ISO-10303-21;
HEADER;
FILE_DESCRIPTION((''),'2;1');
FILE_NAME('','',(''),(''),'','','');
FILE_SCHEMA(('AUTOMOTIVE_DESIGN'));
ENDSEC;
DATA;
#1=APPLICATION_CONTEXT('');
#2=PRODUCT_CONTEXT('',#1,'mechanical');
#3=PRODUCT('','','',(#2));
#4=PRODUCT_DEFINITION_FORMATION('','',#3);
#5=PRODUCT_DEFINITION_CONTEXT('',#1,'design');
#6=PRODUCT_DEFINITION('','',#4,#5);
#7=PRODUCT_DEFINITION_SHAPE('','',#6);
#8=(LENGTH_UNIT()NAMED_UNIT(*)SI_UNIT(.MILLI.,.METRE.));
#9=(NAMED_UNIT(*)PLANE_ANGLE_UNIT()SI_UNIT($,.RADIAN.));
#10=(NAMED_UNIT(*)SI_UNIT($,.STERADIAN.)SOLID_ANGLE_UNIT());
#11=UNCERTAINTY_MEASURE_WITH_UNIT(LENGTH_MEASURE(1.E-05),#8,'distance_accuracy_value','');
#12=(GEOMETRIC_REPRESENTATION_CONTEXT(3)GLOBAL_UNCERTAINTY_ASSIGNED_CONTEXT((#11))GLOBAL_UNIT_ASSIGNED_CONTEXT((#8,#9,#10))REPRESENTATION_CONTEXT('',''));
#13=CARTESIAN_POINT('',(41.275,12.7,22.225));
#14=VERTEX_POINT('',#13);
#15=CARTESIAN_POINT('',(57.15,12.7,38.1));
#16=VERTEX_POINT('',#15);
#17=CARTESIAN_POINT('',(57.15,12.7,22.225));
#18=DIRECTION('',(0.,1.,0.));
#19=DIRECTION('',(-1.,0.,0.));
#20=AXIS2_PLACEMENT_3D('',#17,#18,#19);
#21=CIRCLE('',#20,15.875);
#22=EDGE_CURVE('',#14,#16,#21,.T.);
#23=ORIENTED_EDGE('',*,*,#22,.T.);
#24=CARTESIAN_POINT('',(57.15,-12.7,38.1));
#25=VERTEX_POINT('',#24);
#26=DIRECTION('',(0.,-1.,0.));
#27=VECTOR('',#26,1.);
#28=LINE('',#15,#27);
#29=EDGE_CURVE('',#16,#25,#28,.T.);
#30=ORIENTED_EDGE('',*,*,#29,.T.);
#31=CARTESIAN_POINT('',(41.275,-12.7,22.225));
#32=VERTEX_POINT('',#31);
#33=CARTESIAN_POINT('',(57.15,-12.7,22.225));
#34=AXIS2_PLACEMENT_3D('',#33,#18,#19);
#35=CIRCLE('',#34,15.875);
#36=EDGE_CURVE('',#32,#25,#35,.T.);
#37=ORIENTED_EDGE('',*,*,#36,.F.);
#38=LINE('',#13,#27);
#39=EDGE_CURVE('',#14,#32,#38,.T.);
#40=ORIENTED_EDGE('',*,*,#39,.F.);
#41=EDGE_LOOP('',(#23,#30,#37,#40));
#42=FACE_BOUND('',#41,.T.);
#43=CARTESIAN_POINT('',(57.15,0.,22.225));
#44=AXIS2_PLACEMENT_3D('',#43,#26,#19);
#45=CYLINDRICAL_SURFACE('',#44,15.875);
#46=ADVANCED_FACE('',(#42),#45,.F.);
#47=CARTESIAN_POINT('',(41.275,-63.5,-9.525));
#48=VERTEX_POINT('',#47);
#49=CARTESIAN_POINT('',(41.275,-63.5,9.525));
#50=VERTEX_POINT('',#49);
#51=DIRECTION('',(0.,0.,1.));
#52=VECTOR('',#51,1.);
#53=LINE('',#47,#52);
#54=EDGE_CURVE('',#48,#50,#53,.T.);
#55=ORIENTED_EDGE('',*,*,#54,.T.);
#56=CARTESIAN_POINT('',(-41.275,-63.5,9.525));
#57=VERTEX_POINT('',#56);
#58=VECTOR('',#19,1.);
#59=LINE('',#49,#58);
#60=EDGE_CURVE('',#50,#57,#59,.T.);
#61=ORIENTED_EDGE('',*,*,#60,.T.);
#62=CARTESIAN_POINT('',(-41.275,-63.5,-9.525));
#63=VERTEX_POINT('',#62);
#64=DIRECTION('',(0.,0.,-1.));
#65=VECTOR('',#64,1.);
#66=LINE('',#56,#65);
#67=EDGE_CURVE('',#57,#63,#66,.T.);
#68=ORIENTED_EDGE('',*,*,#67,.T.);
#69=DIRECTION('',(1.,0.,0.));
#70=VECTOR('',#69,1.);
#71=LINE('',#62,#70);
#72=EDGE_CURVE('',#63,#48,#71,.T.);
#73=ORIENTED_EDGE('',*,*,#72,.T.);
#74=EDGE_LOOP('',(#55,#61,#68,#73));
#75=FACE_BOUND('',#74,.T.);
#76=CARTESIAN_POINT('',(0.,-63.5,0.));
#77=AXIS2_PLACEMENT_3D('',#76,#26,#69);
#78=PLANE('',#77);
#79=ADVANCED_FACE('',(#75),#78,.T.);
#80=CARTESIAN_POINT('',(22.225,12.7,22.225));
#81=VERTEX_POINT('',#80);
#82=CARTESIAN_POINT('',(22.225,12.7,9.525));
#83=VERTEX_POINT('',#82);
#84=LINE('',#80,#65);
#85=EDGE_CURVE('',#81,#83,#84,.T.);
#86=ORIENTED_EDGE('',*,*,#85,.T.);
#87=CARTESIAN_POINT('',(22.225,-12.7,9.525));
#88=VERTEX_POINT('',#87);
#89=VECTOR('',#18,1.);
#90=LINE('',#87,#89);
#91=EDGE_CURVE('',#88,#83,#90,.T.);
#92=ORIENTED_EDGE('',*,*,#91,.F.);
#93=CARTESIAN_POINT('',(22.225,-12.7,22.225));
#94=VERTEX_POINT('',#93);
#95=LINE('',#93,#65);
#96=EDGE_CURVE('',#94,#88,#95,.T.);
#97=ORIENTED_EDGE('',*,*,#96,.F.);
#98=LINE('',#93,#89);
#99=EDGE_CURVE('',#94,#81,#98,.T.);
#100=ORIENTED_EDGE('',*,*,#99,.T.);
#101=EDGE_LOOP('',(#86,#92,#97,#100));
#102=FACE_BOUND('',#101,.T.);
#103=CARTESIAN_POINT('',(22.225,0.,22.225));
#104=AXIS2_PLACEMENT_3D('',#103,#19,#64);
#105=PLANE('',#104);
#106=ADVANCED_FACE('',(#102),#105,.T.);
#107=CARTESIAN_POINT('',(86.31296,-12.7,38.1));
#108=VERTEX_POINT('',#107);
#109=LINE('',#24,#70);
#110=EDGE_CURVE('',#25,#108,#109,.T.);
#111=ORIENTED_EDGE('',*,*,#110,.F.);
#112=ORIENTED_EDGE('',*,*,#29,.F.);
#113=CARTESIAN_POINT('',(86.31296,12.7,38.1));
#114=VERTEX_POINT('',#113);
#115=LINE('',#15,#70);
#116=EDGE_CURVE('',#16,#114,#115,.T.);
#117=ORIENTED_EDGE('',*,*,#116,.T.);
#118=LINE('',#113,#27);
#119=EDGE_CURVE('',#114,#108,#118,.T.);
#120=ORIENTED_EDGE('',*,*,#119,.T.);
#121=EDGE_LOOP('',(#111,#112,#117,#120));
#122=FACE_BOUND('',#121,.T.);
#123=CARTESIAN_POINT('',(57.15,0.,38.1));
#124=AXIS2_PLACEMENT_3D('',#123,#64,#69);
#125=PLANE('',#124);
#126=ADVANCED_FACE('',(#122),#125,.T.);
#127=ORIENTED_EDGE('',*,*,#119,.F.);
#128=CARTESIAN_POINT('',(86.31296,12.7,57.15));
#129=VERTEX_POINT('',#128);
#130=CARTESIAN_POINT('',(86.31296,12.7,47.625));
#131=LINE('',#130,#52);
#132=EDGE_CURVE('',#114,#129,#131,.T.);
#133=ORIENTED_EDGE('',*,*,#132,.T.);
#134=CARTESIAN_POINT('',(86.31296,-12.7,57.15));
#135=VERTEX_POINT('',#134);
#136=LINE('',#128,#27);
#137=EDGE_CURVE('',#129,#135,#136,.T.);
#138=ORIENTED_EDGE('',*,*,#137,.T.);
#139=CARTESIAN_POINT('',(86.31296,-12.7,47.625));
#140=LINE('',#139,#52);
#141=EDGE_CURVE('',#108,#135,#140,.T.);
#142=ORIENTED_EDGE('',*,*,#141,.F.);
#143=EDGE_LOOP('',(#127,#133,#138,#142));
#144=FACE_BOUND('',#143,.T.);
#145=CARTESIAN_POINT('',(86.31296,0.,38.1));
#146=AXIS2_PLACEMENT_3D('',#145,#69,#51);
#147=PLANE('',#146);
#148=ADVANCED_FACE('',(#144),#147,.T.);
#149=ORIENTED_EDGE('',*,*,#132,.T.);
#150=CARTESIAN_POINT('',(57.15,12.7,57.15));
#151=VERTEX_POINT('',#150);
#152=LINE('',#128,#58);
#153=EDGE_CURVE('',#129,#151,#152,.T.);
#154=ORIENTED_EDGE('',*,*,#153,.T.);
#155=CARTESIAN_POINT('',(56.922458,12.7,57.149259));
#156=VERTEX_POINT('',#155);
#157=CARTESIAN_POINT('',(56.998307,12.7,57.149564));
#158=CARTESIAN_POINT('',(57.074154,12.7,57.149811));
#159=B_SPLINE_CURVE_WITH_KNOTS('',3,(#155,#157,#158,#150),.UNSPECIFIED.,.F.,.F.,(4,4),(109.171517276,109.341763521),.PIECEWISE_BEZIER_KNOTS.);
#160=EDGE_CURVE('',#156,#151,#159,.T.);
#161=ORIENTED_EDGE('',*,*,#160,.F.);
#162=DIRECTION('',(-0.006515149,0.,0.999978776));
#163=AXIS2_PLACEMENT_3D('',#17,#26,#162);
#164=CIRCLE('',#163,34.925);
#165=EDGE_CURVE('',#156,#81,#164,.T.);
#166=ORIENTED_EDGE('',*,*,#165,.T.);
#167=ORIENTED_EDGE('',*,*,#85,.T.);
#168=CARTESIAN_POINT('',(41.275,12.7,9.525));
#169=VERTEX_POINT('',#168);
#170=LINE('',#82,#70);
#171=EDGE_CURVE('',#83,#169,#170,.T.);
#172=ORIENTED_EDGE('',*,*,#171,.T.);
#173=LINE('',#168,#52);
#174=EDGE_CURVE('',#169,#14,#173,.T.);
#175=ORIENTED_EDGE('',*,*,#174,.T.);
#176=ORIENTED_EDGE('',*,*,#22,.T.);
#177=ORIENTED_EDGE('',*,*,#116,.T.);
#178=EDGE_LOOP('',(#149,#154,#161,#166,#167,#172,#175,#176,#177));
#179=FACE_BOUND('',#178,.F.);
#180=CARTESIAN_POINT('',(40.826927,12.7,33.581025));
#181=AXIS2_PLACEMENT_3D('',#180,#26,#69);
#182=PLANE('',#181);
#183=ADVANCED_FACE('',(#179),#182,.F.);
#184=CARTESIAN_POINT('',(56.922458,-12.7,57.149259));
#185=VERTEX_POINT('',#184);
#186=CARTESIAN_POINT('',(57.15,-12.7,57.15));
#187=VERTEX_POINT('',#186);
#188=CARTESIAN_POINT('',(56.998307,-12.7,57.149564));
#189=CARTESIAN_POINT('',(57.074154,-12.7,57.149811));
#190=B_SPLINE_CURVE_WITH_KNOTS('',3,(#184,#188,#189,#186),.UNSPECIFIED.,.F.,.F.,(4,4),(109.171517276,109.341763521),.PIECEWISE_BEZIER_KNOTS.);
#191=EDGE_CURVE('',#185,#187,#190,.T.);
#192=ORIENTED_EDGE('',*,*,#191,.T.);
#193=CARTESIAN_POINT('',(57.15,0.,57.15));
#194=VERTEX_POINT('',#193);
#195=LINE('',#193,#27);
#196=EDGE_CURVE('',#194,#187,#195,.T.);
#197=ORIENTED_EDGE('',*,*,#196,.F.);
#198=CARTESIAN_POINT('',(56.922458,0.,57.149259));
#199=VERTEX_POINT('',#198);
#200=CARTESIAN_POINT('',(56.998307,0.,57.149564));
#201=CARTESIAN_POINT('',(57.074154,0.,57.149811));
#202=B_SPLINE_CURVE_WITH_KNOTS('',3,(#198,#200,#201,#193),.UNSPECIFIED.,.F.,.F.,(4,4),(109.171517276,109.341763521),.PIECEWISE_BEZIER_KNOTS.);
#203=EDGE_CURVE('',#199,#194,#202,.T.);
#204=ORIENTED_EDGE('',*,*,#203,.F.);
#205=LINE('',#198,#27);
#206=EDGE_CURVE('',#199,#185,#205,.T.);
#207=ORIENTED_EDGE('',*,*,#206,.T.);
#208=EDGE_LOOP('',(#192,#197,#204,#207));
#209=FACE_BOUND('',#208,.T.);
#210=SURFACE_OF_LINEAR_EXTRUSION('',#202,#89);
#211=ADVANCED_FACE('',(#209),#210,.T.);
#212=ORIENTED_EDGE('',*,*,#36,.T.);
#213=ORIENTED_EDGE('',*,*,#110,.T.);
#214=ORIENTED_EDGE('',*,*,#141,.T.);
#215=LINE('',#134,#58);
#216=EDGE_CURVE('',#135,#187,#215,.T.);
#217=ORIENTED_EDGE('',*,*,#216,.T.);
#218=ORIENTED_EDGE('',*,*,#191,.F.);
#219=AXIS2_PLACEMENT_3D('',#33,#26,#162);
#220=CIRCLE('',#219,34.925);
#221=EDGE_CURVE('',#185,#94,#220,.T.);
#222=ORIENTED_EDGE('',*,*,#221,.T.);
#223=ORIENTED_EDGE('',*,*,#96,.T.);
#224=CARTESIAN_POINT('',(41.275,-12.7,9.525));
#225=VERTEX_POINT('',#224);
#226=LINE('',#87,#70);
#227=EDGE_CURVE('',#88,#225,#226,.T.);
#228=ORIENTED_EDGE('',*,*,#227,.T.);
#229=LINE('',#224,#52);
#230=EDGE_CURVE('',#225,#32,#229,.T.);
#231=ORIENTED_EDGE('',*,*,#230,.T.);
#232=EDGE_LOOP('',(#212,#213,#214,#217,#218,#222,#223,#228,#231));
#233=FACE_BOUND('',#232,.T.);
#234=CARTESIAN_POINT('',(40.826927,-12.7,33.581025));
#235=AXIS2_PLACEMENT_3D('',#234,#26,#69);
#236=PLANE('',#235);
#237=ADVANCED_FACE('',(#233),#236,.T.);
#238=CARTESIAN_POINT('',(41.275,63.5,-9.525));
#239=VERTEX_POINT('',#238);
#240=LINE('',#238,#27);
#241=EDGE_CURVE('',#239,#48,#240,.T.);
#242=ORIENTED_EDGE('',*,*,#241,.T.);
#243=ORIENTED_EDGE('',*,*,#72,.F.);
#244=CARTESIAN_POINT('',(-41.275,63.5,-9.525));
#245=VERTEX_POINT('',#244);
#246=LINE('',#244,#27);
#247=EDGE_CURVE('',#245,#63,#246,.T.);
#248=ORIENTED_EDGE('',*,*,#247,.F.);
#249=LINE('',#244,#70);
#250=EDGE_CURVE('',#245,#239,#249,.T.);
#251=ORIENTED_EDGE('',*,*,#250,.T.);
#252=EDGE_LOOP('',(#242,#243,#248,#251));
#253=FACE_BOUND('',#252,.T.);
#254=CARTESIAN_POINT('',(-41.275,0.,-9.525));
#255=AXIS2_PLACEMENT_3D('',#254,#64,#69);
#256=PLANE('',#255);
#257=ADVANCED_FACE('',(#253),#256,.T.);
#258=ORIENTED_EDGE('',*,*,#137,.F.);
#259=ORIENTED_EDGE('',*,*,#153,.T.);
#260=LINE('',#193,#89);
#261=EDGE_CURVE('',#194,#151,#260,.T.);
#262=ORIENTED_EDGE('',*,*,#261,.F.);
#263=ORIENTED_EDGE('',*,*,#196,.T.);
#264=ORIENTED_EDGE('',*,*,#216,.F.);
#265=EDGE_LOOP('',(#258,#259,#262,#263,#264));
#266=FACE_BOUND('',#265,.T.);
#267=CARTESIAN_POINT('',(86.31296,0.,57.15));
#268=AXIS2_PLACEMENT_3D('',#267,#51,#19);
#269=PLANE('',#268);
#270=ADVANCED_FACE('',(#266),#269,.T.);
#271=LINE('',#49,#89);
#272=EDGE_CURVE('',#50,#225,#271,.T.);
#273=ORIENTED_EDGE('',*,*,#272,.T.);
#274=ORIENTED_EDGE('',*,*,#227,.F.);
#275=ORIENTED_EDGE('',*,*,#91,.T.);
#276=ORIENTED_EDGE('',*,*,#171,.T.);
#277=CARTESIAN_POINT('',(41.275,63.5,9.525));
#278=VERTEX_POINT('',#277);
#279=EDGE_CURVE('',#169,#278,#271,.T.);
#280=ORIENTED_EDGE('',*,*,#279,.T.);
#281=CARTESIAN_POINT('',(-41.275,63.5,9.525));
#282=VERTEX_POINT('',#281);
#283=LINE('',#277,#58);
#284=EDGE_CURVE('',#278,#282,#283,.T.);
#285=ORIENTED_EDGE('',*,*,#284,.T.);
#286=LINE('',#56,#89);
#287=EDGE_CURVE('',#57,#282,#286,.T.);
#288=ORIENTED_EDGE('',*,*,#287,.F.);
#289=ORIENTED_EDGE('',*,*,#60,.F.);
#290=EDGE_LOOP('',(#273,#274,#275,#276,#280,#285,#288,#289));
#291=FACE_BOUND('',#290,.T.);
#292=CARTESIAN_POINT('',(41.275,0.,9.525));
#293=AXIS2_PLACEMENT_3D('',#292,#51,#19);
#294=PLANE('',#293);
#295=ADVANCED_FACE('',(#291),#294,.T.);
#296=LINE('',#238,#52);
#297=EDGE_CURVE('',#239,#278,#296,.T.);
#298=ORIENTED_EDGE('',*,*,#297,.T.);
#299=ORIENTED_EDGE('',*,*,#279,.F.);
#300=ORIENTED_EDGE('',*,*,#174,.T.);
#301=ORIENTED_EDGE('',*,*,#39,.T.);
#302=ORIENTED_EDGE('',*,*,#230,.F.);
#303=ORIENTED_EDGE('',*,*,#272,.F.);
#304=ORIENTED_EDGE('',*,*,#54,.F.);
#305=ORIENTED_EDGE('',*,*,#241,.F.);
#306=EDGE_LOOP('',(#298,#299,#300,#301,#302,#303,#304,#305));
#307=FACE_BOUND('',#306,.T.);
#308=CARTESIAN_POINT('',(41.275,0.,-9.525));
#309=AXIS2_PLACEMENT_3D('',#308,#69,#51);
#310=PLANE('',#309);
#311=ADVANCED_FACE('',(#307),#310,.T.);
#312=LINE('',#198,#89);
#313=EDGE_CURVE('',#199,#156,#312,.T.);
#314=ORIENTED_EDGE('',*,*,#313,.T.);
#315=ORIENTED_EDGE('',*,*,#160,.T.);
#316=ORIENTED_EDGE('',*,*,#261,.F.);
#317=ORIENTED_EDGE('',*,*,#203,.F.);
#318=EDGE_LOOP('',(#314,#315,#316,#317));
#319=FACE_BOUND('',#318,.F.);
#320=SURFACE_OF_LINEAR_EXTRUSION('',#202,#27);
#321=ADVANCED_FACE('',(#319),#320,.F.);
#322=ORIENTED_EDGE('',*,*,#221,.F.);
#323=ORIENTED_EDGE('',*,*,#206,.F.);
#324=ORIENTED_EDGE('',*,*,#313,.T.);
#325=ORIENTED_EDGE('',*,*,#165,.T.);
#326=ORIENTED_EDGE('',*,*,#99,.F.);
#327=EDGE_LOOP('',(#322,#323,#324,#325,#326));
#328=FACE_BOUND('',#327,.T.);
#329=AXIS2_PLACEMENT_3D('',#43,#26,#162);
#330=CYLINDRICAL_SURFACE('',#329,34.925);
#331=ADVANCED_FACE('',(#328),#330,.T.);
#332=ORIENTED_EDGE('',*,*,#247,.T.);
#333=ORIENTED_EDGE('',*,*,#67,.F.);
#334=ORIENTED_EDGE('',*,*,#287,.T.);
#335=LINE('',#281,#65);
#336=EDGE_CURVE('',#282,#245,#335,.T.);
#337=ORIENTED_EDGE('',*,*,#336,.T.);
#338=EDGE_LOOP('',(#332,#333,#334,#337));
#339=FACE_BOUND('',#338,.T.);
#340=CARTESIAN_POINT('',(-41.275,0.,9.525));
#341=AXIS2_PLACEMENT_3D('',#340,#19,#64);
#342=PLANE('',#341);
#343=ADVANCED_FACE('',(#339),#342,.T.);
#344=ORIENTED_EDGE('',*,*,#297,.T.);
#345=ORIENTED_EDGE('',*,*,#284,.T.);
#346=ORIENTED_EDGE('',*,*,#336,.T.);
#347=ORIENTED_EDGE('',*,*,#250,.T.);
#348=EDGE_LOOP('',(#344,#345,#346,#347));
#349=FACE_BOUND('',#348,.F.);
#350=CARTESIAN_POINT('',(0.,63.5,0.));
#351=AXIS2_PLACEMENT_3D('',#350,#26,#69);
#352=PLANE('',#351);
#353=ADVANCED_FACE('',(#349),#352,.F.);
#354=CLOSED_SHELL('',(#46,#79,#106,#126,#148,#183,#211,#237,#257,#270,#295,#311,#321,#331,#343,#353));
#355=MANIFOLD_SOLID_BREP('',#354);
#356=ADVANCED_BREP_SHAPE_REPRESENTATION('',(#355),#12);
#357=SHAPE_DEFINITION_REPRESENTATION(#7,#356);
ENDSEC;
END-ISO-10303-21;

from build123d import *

# Parameters (mm, degrees)
F1_DEPTH = 63.5
F0_W     = 25.0981404377
F0_H     = 19.05
F2_DEPTH = 12.7


# Not quite as in the source:
# - a feature of the source that left no trace in its solid (it failed there, or was rolled back) is left out


with BuildPart() as f1:
    # F0 (on Front) → F1 (new body, symmetric)
    with BuildSketch(Plane.XZ):
        Polygon((-41.275, 9.525), (-41.275, -9.525), (41.275, -9.525), (41.275, 9.525), (22.225, 9.525), align=None)
    extrude(amount=F1_DEPTH, both=True)

    # F0 (on Front) → F2 (join, symmetric)
    with BuildSketch(Plane.XZ):
        with BuildLine():
            Line((22.225, 9.525), (41.275, 9.525))
            Line((41.275, 9.525), (41.275, 22.225))
            ThreePointArc((41.275, 22.225), (45.9246798487, 33.4503201513), (57.15, 38.1))
            Line((57.15, 38.1), (61.2148200089, 38.1))
            Line((61.2148200089, 38.1), (61.2148200089, 57.15))
            Line((61.2148200089, 57.15), (57.15, 57.15))
            add(Edge.make_bspline(
                [(56.9224584332, 57.1492587586), (56.9983070138, 57.1495642251), (57.0741542652, 57.1498113371), (57.15, 57.15)],
                knots=[109.1715172756, 109.1715172756, 109.1715172756, 109.1715172756, 109.3417635215, 109.3417635215, 109.3417635215, 109.3417635215], degree=3))
            ThreePointArc((56.9224584332, 57.1492587586), (32.3739781823, 46.8401247791), (22.225, 22.225))
            Line((22.225, 22.225), (22.225, 9.525))
        make_face()
        with Locations((73.7638902278, 47.625)):
            Rectangle(F0_W, F0_H)
    extrude(amount=F2_DEPTH, both=True)


solid = f1.part
